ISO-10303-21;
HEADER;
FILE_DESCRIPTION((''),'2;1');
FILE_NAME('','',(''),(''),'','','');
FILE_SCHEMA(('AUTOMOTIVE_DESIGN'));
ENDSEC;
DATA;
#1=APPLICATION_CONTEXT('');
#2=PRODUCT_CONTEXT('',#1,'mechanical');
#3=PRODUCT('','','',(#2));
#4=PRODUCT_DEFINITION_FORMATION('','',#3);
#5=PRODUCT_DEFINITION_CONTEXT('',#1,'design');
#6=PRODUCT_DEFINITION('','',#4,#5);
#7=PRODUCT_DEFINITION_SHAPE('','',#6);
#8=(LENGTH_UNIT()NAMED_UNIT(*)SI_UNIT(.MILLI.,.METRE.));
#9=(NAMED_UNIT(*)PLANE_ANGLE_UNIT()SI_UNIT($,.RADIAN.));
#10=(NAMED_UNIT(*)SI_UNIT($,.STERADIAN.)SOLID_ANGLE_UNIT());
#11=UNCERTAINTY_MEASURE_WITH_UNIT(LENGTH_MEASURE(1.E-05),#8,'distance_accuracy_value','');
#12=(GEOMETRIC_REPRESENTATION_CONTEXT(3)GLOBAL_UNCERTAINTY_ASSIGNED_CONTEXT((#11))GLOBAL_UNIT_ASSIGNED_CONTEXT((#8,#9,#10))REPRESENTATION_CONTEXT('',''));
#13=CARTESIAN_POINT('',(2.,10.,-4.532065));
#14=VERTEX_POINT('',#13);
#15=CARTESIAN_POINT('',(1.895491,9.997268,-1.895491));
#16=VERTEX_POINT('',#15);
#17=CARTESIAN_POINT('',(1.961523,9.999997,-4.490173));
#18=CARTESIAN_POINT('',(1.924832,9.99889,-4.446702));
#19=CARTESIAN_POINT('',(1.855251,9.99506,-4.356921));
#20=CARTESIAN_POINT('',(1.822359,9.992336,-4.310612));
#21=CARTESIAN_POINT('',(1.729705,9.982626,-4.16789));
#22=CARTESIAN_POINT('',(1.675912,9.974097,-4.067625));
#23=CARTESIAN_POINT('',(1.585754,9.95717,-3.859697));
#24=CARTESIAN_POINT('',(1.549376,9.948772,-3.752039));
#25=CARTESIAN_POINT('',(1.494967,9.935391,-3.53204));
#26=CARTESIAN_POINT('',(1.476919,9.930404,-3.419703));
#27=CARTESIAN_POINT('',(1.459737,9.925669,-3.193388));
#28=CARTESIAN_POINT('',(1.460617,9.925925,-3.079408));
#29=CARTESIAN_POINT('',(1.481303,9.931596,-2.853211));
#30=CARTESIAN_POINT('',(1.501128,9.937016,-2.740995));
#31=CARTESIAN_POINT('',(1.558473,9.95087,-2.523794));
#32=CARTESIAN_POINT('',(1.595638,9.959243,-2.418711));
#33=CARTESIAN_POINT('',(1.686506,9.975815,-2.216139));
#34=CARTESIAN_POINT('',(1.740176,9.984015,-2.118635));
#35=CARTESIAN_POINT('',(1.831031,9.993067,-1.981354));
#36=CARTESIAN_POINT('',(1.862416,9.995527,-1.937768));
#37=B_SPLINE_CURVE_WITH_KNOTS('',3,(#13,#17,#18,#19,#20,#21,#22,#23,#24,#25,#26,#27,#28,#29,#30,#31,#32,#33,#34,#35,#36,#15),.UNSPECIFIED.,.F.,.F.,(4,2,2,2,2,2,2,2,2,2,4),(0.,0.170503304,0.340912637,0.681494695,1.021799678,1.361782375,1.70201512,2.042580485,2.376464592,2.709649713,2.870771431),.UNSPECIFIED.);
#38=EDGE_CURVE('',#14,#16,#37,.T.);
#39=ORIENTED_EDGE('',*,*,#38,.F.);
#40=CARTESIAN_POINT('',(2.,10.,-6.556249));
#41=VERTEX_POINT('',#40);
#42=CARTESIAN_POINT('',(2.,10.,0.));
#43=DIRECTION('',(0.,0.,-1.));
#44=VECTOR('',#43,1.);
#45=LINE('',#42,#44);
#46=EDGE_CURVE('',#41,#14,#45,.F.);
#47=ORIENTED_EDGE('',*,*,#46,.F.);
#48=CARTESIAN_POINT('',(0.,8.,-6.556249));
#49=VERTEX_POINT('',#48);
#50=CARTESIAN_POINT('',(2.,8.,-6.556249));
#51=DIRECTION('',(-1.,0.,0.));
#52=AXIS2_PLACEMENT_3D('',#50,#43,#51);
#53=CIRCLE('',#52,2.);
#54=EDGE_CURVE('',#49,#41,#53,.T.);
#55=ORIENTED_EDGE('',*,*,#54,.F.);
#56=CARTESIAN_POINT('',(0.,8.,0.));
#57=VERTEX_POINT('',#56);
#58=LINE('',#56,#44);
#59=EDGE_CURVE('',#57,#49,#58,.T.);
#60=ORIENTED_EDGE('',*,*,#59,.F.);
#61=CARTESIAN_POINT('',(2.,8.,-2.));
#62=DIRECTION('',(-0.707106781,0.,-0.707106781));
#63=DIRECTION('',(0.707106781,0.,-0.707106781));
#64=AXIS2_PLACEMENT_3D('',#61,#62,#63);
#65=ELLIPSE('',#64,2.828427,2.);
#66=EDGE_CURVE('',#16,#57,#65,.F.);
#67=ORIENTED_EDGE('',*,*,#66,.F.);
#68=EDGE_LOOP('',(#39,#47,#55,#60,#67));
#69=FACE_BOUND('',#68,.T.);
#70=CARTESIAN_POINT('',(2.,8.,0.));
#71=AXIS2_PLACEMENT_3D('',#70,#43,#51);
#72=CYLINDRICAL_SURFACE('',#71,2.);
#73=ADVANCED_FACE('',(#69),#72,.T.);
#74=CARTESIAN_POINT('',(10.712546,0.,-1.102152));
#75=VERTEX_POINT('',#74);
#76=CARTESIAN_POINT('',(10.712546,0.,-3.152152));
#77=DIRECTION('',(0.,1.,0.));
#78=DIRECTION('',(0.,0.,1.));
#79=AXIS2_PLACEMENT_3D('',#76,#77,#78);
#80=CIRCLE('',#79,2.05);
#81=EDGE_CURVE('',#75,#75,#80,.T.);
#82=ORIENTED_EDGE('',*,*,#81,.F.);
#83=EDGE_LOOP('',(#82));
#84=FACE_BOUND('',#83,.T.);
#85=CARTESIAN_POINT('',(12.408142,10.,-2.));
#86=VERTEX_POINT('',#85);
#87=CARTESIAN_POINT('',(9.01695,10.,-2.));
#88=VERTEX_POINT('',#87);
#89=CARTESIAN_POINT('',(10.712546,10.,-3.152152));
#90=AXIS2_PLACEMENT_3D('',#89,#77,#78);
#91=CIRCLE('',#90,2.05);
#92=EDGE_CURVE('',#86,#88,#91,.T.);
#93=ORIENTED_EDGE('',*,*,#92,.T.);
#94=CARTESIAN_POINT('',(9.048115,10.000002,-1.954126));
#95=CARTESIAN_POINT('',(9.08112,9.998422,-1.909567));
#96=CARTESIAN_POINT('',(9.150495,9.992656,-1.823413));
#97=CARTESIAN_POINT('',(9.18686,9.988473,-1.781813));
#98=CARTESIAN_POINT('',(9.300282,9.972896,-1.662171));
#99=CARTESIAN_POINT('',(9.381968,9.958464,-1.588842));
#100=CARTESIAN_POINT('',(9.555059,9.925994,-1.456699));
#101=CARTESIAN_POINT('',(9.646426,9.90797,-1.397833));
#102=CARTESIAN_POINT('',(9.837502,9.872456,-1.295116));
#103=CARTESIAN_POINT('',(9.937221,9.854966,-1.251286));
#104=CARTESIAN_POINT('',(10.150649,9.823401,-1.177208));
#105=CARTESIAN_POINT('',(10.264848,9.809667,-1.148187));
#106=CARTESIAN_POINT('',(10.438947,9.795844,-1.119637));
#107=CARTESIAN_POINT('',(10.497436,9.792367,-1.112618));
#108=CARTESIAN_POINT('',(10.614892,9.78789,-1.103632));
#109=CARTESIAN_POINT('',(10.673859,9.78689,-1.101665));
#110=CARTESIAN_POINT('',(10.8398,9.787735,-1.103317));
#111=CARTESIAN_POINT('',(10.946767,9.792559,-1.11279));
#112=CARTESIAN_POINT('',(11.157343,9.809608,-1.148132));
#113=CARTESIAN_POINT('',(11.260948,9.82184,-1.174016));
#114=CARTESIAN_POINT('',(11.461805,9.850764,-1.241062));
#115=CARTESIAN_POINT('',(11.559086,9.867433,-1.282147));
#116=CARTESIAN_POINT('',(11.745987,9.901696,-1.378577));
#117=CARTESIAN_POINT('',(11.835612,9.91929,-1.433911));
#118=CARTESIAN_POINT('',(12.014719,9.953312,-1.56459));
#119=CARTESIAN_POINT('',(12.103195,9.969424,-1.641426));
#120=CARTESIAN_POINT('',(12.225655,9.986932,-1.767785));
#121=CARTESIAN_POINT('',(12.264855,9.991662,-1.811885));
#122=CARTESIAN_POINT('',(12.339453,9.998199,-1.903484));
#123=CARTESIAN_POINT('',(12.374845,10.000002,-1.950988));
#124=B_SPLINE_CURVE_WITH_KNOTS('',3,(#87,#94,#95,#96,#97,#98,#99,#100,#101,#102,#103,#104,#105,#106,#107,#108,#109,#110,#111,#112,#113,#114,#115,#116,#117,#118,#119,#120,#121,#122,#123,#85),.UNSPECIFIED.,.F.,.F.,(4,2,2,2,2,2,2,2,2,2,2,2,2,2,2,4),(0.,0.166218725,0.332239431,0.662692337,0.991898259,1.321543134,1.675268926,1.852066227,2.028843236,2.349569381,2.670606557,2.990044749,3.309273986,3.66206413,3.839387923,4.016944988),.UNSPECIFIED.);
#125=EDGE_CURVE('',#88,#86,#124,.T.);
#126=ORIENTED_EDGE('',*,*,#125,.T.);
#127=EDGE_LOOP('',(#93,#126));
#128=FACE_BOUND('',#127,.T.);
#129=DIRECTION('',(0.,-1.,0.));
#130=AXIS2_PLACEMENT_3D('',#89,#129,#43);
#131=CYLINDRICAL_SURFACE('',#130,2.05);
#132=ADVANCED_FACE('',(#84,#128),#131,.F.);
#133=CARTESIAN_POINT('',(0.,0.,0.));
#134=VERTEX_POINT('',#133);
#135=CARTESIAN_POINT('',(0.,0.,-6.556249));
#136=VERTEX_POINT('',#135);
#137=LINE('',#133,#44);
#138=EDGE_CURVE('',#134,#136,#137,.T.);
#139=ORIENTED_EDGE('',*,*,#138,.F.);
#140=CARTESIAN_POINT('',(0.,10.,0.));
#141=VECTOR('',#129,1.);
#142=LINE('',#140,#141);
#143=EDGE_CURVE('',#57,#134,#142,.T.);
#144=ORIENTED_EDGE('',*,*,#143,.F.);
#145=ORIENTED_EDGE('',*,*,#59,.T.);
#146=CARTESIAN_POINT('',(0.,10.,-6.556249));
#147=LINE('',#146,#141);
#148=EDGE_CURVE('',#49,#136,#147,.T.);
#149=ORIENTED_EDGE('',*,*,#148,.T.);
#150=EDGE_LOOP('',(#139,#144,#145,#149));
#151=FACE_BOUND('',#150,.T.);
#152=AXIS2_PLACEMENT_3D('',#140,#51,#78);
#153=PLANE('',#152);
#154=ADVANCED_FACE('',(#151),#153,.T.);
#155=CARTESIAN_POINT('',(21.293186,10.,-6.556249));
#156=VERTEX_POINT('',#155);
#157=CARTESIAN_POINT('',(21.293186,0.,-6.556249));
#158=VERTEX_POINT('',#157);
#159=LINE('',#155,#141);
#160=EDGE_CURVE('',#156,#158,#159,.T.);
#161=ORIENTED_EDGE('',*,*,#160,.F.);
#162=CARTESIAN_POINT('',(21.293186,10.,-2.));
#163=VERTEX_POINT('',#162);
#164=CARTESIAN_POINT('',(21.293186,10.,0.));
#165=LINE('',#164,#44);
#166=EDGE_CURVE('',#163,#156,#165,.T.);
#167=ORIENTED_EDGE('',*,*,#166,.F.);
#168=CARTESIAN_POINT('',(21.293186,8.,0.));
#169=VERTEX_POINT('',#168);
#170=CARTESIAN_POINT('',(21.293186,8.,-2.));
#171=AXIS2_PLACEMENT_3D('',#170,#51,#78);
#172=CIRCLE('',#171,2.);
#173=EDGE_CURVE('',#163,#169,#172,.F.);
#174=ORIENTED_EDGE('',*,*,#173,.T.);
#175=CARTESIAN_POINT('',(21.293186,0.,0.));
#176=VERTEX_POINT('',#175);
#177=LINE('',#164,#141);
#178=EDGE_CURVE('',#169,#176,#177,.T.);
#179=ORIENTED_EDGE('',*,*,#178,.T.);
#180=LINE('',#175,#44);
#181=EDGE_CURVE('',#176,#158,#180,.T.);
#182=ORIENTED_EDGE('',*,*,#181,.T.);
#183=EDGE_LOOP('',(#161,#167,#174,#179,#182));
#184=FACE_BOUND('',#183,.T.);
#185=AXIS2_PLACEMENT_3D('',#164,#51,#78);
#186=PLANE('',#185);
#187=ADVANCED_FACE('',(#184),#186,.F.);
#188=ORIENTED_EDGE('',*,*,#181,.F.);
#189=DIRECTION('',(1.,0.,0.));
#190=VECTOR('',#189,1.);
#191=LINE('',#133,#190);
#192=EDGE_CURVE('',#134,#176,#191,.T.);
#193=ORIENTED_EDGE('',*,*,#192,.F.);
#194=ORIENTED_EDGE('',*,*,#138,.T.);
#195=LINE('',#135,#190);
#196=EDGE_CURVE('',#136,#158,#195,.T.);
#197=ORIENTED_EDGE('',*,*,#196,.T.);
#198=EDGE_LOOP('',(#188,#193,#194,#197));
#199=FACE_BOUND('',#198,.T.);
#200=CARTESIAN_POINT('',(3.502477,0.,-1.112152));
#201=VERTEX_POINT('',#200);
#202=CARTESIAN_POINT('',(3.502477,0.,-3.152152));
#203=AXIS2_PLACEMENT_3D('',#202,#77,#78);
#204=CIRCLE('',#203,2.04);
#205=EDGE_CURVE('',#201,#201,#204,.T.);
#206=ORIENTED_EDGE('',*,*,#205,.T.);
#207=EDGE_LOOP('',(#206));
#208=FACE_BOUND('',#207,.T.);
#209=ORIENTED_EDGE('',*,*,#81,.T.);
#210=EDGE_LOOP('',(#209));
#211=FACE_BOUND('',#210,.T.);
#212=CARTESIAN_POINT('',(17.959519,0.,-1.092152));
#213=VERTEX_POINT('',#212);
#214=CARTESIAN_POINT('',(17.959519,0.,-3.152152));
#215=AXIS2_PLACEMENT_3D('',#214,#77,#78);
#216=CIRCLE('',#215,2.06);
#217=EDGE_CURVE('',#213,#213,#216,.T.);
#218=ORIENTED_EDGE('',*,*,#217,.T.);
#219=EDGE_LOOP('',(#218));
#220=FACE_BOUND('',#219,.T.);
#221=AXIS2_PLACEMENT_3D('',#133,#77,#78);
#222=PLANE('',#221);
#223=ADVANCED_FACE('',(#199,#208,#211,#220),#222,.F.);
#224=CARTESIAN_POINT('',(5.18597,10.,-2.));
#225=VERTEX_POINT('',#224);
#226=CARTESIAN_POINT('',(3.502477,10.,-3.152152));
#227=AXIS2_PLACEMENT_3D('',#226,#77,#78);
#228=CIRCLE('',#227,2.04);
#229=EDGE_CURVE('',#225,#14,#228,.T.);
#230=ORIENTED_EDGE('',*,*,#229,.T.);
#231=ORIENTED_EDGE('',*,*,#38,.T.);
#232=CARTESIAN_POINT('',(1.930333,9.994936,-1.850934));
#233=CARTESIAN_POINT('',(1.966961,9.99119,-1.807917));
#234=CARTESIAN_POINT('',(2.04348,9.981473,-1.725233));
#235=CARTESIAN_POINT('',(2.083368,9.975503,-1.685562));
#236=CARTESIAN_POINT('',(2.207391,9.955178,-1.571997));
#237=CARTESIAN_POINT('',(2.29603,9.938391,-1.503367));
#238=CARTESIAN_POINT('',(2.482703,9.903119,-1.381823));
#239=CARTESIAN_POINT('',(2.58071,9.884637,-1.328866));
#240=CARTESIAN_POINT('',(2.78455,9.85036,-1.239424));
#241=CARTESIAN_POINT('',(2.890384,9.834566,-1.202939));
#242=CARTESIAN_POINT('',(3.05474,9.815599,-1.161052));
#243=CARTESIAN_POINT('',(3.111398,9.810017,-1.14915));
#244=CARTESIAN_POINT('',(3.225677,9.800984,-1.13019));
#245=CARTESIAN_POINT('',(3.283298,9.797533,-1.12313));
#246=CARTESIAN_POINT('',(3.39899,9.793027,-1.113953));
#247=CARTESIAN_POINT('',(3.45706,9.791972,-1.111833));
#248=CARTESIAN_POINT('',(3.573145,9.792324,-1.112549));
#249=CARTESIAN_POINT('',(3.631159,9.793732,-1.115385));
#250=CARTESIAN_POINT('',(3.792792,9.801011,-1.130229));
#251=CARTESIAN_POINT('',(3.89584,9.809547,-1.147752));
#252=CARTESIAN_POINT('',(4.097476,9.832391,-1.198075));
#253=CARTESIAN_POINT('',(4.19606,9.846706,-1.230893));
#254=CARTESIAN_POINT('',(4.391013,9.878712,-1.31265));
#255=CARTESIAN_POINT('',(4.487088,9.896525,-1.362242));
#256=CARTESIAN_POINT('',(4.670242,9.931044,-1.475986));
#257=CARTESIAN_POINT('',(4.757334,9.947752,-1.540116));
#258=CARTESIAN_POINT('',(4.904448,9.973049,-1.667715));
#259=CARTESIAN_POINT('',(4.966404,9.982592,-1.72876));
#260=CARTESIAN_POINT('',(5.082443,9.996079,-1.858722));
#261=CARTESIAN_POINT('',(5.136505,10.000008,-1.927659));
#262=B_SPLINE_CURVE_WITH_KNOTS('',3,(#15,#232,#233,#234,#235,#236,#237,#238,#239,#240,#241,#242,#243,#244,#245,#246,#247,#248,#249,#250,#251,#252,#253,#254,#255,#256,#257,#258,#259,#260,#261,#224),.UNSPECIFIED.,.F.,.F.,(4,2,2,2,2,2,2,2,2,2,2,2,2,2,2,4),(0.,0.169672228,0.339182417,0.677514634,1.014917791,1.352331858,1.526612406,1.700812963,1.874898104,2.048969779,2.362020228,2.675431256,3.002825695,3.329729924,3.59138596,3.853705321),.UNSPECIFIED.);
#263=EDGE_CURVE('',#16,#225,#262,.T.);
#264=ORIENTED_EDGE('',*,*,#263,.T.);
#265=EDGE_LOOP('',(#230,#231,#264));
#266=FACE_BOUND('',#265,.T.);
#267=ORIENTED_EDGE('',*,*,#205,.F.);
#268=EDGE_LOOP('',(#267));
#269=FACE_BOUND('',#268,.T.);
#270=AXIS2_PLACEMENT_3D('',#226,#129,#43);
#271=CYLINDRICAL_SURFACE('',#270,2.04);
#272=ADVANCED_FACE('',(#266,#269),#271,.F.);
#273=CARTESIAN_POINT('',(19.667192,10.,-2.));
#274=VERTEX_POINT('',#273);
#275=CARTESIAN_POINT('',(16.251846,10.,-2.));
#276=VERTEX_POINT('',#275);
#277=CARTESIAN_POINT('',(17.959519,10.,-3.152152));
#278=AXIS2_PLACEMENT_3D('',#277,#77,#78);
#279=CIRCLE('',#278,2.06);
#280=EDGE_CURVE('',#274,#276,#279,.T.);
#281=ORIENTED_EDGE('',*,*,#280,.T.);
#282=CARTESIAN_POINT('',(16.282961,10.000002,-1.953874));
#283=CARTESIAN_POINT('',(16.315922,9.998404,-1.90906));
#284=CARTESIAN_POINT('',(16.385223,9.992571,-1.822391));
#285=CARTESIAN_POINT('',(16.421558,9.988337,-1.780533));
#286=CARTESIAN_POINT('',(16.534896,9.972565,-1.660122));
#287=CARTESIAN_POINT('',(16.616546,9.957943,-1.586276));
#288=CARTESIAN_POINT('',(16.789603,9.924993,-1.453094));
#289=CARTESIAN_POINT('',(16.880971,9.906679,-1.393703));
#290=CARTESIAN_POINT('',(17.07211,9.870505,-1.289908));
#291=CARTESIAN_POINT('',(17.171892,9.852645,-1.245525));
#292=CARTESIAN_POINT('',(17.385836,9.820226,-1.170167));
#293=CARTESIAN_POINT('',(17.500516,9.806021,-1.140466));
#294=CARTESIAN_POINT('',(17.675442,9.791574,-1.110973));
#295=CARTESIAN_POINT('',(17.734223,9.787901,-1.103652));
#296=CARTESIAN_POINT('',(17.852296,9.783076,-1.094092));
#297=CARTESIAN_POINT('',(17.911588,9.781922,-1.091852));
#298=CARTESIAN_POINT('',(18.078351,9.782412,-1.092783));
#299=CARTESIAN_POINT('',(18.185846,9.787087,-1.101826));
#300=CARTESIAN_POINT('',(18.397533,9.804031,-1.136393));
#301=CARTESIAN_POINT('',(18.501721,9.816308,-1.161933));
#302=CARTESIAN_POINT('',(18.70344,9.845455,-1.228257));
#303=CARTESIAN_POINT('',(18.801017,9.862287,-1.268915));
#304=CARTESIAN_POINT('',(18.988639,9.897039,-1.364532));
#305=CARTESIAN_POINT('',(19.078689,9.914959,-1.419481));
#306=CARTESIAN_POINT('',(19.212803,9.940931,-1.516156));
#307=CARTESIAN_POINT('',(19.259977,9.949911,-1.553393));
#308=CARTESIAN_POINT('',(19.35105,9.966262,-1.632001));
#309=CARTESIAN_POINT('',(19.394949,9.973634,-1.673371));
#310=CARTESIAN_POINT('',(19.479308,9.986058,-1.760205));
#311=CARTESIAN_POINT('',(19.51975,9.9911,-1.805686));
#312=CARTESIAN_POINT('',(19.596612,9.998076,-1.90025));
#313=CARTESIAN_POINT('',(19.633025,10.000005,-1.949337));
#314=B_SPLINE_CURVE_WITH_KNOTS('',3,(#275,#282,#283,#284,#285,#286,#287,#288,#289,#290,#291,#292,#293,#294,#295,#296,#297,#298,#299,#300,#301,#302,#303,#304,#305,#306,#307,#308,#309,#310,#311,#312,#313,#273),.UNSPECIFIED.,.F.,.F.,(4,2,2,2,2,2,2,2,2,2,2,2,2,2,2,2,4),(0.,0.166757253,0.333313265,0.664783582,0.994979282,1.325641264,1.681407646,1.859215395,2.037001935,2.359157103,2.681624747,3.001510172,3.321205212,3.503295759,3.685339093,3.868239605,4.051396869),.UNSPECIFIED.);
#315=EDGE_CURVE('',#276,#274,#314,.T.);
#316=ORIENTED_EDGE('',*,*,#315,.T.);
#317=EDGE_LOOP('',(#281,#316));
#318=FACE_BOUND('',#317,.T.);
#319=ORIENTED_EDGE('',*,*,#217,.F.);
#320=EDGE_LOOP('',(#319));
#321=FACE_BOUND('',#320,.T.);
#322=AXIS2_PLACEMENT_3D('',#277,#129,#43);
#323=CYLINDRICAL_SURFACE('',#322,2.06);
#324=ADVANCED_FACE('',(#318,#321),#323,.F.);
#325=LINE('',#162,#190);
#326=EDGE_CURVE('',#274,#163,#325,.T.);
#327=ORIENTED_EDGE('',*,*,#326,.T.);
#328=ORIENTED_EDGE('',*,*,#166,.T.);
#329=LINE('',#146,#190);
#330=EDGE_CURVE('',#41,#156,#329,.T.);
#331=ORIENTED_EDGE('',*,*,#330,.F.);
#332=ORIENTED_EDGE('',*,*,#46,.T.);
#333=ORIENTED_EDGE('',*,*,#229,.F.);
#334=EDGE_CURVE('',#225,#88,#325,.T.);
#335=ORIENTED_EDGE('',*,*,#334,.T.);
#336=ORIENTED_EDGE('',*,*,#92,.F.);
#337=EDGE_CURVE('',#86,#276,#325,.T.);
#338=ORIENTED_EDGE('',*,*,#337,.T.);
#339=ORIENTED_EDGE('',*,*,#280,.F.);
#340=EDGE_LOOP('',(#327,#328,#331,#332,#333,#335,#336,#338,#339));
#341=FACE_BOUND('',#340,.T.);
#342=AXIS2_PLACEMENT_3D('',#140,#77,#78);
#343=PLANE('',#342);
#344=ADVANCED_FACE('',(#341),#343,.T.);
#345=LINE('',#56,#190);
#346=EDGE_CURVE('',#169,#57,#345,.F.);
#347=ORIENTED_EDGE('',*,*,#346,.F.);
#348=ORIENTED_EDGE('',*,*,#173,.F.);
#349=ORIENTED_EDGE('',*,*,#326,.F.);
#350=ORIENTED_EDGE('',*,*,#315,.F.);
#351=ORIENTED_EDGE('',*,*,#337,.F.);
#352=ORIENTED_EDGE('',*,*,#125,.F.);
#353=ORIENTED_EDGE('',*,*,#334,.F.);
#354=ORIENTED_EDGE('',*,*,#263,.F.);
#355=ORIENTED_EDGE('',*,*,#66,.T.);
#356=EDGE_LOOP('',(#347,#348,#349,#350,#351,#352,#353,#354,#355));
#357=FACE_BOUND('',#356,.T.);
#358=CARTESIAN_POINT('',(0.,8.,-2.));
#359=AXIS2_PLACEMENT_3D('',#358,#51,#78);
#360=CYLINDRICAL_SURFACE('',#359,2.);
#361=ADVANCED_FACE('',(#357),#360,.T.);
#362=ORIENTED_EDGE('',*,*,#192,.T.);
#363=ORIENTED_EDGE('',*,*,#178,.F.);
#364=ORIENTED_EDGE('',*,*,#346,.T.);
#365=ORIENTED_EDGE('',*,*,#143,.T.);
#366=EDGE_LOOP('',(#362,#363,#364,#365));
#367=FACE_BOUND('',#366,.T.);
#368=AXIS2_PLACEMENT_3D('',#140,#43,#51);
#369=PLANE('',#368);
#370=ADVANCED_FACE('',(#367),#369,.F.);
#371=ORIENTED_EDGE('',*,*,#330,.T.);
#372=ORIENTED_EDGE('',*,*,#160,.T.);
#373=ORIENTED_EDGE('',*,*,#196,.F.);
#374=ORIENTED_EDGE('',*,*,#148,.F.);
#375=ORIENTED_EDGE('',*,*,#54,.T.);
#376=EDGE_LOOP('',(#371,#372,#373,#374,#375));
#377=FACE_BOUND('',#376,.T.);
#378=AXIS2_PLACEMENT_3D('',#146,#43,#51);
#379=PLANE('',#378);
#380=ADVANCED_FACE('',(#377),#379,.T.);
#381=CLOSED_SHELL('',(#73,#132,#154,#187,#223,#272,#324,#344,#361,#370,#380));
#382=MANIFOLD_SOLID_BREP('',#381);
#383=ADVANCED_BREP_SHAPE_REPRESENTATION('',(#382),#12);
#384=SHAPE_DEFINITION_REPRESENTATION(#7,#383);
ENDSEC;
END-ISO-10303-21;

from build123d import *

# Parameters (mm, degrees)
SKETCH1_W           = 21.293186277
SKETCH1_H           = 6.556248908
SKETCH1_R           = 2.06
SKETCH1_R_2         = 2.04
SKETCH1_R_3         = 2.05
BOSS_EXTRUDE1_DEPTH = 10
FILLET1_R           = 2


with BuildPart() as part:
    # Sketch1 → Boss-Extrude1 (new body)
    with BuildSketch(Plane(origin=(0, 0, 0), x_dir=(1, 0, 0), z_dir=(0, 1, 0))):
        with Locations((10.646593139, 3.278124454)):
            Rectangle(SKETCH1_W, SKETCH1_H)
        with Locations(Location((17.959518774, 3.152151811, 0), (0, 0, 270))):
            Circle(SKETCH1_R, mode=Mode.SUBTRACT)
        with Locations(Location((3.502477391, 3.152151811, 0), (0, 0, 270))):
            Circle(SKETCH1_R_2, mode=Mode.SUBTRACT)
        with Locations(Location((10.712545691, 3.152151811, 0), (0, 0, 270))):
            Circle(SKETCH1_R_3, mode=Mode.SUBTRACT)
    extrude(amount=BOSS_EXTRUDE1_DEPTH)

    # Fillet1
    # the kernel refuses this fillet: 2 mm, written as the material it takes off along each edge
    with BuildSketch(Plane(origin=(-5, 10, 0), x_dir=(0, -1, 0), z_dir=(1, 0, 0))) as fillet1_piece_1:
        with BuildLine():
            CenterArc((FILLET1_R, FILLET1_R), FILLET1_R, 180, 90)
            Line((0, FILLET1_R), (0, 0))
            Line((0, 0), (FILLET1_R, 0))
        make_face()
    extrude(amount=31.293186277, mode=Mode.SUBTRACT)
    with BuildSketch(Plane(origin=(0, 10, -11.556248908), x_dir=(0, -1, 0), z_dir=(0, 0, 1))) as fillet1_piece_2:
        with BuildLine():
            CenterArc((FILLET1_R, FILLET1_R), FILLET1_R, 180, 90)
            Line((0, FILLET1_R), (0, 0))
            Line((0, 0), (FILLET1_R, 0))
        make_face()
    extrude(amount=16.556248908, mode=Mode.SUBTRACT)


solid = part.part
